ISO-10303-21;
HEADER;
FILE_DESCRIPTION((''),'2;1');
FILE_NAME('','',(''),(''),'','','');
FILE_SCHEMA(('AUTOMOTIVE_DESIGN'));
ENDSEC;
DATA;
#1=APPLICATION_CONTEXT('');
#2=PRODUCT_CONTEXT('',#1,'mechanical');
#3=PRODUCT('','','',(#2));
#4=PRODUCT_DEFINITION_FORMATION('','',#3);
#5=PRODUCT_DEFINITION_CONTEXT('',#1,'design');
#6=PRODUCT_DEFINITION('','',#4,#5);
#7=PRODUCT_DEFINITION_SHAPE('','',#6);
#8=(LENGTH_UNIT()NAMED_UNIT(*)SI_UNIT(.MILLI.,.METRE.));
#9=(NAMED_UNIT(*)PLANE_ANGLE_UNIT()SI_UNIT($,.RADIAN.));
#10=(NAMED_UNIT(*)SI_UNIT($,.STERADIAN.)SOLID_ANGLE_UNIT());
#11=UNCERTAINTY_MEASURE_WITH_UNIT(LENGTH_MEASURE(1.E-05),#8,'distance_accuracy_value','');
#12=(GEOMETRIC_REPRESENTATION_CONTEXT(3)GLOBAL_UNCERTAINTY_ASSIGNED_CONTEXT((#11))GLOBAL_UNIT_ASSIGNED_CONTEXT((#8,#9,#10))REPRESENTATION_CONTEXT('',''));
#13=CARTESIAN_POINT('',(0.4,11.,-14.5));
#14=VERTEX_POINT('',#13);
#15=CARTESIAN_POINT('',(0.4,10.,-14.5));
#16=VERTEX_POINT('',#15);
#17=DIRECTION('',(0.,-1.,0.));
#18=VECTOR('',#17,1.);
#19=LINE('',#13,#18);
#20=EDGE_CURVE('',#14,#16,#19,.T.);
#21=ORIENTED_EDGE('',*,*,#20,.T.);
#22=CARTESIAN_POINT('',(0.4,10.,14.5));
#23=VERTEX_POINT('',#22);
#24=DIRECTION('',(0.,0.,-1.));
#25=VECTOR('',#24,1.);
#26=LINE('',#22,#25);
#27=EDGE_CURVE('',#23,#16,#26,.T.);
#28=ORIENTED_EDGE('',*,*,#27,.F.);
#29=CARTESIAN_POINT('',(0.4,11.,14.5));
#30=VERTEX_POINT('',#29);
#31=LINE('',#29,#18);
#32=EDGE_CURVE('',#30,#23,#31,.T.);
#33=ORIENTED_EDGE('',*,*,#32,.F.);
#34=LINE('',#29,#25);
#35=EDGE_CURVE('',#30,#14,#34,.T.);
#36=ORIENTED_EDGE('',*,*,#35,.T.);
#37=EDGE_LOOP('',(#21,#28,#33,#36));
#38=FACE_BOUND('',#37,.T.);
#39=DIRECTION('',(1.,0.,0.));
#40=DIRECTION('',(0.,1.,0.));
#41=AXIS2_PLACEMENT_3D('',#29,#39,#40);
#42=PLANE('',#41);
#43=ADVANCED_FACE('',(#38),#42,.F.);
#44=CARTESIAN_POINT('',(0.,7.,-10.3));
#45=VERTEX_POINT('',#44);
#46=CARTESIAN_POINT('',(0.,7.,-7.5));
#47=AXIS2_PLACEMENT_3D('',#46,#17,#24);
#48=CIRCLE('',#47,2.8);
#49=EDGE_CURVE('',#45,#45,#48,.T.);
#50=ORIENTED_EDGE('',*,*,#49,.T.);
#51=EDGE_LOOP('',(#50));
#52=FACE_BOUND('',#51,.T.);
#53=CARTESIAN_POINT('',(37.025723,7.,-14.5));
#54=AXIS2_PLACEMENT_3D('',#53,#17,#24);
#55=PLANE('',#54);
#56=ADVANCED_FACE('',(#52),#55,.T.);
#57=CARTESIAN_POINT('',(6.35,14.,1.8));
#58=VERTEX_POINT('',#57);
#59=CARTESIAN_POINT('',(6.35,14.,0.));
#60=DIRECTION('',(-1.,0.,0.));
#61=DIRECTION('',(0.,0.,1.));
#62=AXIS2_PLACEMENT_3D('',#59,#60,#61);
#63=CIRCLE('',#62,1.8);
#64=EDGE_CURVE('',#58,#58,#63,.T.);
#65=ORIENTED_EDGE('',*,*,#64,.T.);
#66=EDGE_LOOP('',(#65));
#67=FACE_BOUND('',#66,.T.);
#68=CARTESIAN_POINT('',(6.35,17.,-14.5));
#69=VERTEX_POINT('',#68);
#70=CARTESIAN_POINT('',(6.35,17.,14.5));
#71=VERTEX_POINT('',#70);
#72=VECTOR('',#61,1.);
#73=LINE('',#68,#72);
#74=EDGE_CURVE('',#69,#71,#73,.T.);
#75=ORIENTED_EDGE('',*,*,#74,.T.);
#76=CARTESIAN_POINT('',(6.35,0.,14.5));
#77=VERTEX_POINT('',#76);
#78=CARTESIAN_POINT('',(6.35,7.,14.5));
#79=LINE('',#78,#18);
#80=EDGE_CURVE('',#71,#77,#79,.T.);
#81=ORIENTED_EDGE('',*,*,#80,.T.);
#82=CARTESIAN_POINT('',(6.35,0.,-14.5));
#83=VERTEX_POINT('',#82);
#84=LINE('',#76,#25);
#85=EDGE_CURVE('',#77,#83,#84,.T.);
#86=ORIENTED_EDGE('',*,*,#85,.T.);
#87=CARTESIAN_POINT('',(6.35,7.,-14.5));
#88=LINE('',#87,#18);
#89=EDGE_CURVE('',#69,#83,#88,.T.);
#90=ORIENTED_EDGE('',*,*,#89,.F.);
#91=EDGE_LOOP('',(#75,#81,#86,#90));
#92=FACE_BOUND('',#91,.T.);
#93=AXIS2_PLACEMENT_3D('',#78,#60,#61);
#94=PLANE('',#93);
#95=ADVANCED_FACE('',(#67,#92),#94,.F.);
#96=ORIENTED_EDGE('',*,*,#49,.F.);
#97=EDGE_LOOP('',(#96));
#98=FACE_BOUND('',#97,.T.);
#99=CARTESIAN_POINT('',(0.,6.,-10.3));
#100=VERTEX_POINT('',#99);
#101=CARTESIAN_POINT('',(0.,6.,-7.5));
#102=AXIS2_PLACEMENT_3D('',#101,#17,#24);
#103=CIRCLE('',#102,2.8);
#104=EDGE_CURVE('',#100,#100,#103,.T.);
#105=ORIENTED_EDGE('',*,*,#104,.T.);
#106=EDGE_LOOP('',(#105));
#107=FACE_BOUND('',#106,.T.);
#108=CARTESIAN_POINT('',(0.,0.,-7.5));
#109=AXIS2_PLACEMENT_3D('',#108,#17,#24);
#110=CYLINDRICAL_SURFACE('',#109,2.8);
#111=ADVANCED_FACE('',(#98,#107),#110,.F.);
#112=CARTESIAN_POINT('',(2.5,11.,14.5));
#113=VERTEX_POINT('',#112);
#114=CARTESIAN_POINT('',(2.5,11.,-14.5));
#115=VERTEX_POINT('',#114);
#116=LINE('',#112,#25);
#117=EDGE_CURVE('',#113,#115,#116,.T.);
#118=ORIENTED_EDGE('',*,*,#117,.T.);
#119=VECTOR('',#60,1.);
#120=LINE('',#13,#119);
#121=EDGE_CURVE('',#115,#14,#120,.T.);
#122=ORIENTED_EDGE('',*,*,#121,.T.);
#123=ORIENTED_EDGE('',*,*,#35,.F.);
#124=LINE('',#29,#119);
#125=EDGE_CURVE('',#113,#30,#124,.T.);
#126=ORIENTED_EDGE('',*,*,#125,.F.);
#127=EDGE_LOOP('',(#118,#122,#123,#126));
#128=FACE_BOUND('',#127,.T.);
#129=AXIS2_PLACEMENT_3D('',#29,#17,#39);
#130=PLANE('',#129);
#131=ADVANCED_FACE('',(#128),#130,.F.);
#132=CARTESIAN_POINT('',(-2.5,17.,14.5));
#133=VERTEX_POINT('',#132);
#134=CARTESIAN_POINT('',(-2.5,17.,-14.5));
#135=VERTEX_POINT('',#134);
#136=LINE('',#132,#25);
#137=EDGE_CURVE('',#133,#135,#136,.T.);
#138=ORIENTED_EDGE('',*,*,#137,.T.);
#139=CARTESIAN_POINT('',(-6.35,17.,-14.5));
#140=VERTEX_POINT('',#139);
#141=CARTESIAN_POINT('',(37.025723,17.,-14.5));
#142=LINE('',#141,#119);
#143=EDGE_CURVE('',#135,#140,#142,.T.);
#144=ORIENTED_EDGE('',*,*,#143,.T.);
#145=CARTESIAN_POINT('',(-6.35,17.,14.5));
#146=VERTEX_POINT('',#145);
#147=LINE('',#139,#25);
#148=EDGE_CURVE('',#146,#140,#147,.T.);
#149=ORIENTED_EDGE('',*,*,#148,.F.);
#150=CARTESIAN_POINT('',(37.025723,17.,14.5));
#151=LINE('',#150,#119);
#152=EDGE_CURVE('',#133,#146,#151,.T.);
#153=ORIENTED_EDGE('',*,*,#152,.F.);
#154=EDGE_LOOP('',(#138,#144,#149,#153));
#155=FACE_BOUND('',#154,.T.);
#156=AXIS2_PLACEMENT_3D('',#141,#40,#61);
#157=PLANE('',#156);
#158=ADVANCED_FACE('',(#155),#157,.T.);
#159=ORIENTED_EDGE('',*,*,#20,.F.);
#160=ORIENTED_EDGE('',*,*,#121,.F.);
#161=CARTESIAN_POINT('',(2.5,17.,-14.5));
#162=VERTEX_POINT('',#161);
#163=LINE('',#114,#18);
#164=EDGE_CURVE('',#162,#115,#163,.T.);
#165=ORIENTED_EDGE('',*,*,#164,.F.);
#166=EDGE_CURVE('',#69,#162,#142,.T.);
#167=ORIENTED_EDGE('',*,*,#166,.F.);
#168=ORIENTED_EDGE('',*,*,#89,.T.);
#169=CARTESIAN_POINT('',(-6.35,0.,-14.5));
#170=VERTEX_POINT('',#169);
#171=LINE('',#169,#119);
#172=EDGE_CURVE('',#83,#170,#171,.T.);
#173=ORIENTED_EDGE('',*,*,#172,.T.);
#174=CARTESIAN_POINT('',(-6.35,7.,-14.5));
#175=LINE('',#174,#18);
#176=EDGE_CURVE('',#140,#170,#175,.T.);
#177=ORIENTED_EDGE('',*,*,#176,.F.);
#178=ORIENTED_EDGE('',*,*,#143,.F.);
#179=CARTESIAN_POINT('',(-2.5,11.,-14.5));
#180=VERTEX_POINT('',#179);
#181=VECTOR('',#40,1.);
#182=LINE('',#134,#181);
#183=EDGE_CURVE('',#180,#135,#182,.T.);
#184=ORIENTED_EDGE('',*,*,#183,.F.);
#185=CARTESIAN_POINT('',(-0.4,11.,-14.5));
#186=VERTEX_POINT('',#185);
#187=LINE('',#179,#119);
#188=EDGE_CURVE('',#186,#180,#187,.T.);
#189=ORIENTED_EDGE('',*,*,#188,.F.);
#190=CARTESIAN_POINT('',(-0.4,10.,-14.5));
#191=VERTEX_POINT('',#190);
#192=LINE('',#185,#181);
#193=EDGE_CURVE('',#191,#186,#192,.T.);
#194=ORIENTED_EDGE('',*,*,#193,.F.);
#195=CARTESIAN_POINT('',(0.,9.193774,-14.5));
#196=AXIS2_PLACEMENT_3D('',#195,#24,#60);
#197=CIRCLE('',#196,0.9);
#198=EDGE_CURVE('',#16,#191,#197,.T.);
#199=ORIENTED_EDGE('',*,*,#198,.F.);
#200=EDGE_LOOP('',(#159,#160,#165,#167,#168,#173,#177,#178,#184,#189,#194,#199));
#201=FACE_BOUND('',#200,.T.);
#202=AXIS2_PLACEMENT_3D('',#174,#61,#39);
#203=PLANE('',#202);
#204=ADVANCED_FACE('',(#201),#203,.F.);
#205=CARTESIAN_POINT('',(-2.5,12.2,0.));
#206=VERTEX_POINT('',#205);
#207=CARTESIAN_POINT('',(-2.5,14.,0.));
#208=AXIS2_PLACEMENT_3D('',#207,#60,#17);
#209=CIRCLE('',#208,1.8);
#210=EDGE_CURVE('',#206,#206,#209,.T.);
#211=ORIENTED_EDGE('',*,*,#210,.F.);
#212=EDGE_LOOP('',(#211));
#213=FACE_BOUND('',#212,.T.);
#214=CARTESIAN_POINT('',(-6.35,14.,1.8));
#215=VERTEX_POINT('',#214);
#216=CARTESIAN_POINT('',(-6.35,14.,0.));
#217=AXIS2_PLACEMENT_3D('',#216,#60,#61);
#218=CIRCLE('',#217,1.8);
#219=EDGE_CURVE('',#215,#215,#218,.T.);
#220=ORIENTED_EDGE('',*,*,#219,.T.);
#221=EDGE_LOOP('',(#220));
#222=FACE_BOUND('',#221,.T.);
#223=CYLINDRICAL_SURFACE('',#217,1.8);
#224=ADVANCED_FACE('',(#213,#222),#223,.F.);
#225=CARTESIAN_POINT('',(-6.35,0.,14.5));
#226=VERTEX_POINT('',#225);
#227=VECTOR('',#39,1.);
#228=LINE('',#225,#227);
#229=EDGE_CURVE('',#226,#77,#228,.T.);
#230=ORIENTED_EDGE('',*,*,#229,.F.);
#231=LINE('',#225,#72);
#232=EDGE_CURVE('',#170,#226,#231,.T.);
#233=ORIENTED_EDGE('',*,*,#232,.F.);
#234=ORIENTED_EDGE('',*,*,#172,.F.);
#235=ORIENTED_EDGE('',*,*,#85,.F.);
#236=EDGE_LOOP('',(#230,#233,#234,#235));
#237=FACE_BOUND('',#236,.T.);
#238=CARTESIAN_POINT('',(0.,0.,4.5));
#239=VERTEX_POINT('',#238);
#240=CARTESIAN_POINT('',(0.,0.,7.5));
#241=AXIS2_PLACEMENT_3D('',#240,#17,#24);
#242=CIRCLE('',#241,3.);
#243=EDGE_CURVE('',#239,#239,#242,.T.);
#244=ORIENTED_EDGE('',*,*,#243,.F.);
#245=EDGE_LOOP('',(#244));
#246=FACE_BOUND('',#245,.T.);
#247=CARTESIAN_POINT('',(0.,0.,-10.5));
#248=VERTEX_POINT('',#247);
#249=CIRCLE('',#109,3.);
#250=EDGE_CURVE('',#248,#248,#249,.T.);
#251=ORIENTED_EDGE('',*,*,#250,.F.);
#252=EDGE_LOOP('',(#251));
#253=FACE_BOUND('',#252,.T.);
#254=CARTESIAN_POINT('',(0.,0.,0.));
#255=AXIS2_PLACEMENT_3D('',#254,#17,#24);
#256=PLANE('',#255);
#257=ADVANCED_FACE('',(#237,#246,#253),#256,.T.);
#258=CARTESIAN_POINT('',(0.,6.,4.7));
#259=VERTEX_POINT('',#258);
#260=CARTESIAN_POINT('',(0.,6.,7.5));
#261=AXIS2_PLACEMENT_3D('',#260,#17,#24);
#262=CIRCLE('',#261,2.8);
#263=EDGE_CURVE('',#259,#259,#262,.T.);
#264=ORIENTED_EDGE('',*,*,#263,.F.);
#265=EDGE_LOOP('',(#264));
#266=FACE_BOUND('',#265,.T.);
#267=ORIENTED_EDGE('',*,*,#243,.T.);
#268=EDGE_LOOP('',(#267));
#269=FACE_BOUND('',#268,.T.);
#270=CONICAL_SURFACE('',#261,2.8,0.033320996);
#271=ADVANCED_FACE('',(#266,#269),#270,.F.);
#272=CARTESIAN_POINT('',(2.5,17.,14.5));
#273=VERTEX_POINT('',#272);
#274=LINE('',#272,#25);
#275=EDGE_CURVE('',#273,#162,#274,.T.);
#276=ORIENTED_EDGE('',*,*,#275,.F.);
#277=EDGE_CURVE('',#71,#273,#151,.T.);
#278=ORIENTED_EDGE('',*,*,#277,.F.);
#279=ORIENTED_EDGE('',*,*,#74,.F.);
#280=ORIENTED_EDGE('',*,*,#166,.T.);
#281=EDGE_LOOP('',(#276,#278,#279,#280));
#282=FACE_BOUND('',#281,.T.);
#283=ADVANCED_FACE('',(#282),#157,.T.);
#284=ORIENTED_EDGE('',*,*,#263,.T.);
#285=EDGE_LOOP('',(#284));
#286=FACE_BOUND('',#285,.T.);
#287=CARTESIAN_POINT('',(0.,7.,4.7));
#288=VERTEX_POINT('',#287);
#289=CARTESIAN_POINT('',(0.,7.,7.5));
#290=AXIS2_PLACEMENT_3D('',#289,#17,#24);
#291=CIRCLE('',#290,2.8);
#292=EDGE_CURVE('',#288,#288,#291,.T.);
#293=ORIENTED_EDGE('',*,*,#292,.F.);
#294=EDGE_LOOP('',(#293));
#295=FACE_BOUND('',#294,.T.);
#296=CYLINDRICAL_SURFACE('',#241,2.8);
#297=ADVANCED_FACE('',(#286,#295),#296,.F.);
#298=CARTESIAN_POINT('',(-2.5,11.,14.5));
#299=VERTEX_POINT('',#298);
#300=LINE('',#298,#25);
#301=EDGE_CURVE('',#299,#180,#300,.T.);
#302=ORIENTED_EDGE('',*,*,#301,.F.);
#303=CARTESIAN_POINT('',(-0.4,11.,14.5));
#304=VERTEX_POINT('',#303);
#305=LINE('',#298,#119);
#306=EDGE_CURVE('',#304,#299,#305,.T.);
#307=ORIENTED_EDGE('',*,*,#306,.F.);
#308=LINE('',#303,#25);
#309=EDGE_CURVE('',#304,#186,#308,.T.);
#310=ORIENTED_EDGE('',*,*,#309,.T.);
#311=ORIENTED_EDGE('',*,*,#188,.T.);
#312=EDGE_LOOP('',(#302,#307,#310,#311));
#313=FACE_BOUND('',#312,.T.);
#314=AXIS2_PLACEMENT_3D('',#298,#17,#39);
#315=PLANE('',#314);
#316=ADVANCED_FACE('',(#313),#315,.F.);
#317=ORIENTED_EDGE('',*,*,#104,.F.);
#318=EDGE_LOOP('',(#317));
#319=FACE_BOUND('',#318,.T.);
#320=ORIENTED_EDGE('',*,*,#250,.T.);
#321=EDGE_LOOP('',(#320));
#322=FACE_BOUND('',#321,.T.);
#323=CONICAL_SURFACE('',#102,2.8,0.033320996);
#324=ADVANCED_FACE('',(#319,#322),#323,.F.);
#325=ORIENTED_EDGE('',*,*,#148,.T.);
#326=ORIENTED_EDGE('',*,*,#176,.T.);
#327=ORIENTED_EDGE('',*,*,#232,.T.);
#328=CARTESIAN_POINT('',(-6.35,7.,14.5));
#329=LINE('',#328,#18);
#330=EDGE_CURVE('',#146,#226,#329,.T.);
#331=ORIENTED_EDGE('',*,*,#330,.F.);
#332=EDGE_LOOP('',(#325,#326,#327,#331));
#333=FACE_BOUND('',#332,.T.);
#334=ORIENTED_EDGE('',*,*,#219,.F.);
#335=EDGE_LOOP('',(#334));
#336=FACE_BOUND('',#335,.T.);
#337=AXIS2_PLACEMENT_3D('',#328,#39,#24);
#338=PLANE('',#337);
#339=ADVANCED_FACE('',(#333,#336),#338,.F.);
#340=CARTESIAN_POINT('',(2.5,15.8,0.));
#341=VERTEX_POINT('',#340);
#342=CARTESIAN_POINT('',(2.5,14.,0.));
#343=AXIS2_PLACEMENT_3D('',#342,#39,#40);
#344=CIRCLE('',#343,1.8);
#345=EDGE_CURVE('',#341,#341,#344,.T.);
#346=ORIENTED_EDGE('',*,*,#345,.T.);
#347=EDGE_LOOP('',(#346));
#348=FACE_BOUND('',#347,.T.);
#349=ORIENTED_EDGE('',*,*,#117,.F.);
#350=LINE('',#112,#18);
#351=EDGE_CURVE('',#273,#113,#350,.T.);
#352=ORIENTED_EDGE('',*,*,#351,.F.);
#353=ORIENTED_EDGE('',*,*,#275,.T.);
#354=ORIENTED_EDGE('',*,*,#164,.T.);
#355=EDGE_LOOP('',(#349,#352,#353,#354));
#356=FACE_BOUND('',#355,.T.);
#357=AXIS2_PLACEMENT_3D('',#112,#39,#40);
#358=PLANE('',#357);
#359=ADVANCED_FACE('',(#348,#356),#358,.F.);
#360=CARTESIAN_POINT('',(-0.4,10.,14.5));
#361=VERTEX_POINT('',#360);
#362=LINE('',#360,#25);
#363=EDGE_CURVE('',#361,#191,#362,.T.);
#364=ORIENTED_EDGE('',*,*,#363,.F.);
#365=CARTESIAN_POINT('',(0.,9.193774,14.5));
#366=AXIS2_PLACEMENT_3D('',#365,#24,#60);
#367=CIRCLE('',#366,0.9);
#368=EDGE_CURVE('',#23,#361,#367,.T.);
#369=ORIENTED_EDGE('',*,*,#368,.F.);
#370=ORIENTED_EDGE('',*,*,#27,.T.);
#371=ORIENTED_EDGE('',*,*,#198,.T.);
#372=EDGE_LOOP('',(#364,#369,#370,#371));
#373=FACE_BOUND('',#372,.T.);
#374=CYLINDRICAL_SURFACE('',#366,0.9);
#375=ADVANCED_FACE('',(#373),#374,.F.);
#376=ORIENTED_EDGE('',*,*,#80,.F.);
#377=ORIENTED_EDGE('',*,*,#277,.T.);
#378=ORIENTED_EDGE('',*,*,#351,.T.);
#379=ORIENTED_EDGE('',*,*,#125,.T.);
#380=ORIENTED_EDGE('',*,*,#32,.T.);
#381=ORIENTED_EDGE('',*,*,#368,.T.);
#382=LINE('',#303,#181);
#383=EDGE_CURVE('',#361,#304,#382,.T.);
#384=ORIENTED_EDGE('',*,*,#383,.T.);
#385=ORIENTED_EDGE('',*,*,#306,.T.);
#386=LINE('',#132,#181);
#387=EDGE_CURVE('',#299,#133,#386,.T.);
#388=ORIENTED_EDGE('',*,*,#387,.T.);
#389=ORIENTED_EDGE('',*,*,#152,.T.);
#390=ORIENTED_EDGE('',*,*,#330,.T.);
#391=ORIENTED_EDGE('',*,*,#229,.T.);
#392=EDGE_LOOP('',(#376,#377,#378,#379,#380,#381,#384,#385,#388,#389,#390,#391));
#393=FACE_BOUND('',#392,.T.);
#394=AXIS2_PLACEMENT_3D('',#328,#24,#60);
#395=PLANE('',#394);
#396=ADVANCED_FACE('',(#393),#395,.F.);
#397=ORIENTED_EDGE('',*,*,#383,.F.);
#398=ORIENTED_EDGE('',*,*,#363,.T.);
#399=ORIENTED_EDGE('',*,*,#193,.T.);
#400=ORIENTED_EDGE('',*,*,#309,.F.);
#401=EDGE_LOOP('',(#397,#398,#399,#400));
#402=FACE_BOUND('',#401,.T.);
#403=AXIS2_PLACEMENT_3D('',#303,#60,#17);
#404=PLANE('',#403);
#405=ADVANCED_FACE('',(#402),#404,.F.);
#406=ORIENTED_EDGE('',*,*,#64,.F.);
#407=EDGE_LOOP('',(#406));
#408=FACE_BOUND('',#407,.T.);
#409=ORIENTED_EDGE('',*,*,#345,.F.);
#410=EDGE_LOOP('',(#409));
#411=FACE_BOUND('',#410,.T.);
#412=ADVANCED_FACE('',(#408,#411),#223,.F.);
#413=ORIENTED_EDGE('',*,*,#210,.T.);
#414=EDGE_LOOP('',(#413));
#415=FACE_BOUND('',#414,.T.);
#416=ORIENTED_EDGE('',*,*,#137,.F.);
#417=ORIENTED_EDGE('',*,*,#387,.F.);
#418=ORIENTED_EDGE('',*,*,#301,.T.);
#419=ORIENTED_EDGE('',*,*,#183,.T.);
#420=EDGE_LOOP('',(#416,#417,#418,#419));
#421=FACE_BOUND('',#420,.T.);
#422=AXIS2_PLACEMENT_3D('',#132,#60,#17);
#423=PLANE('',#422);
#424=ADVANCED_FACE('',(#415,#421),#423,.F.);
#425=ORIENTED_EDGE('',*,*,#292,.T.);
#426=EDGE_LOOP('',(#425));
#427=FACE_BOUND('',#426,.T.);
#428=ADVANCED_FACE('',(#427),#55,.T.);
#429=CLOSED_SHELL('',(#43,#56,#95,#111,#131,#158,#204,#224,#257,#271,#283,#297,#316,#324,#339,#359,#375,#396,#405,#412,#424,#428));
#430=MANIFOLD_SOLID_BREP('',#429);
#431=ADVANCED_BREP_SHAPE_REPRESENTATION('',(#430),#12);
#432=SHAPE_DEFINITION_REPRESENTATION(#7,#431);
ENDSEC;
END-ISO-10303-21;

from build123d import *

# Parameters (mm, degrees)
SKETCH1_W            = 12.7
SKETCH1_H            = 29
BOSS_EXTRUDE1_DEPTH  = 7
HOLE1_D              = 5.6
HOLE1_CBORE_D        = 6
HOLE1_CBORE_DEPTH    = 6
SKETCH4_W            = 29
SKETCH4_H            = 10
BOSS_EXTRUDE2_DEPTH  = 12.7
CUT_EXTRUDE1_DEPTH   = 35.209976615
M3_CLEARANCE_HOLE1_D = 3.6
CHAMFER1_SIZE        = 6
CHAMFER1_SIZE_2      = 0.2


with BuildPart() as part:
    # Sketch1 → Boss-Extrude1 (new body)
    with BuildSketch(Plane(origin=(0, 0, 0), x_dir=(1, 0, 0), z_dir=(0, 1, 0))):
        Rectangle(SKETCH1_W, SKETCH1_H)
    extrude(amount=BOSS_EXTRUDE1_DEPTH)

    # Hole1 (through all)
    with Locations(Plane(origin=(0, 0, 0), x_dir=(-1, 0, 0), z_dir=(0, -1, 0))):
        with Locations((0, -7.5), (0, 7.5)):
            CounterBoreHole(HOLE1_D / 2, HOLE1_CBORE_D / 2, HOLE1_CBORE_DEPTH)

    # Sketch4 → Boss-Extrude2 (add)
    with BuildSketch(Plane.ZY.offset(6.35)):
        with Locations((0, 12)):
            Rectangle(SKETCH4_W, SKETCH4_H)
    extrude(amount=-BOSS_EXTRUDE2_DEPTH)

    # Sketch5 → Cut-Extrude1 (cut, through all)
    with BuildSketch(Plane(origin=(0, 0, -14.5), x_dir=(-1, 0, 0), z_dir=(0, 0, -1))):
        with BuildLine():
            Line((-0.4, 11), (-0.4, 10))
            ThreePointArc((-0.4, 10), (0, 8.293774225), (0.4, 10))
            Line((0.4, 10), (0.4, 11))
            Line((0.4, 11), (2.5, 11))
            Line((2.5, 11), (2.5, 17))
            Line((2.5, 17), (-2.5, 17))
            Line((-2.5, 17), (-2.5, 11))
            Line((-2.5, 11), (-0.4, 11))
        make_face()
    extrude(amount=-CUT_EXTRUDE1_DEPTH, mode=Mode.SUBTRACT)

    # M3 Clearance Hole1 (through all)
    with Locations(Plane.ZY.offset(6.35)):
        with Locations((0, 14)):
            Hole(M3_CLEARANCE_HOLE1_D / 2)

    # Chamfer1
    # the kernel refuses this chamfer: 6, 0.2 mm, written as the material it adds along each edge
    with BuildSketch(Plane(origin=(0, 6, -7.5), x_dir=(-1, 0, 0), z_dir=(0, 0, 1))) as chamfer1_piece_1_section:
        Polygon((3, CHAMFER1_SIZE), (3 - CHAMFER1_SIZE_2, 0), (3, 0), align=None)
    chamfer1_piece_1 = revolve(axis=Axis((0, 6, -7.5), (0, -1, 0)), mode=Mode.PRIVATE)
    chamfer1_piece_1 = split(chamfer1_piece_1, bisect_by=Plane(origin=(2.92947192, 0, -7.5), z_dir=(0, 1, 0)), keep=Keep.TOP, mode=Mode.PRIVATE)
    chamfer1_piece_1 = chamfer1_piece_1 - Plane(origin=(0, 3.000982397, -7.5), x_dir=(1, 0, 0), z_dir=(0, 1, 0)) * Cylinder(2.8, 24, mode=Mode.PRIVATE)
    add(chamfer1_piece_1)
    with BuildSketch(Plane(origin=(0, 6, 7.5), x_dir=(-1, 0, 0), z_dir=(0, 0, 1))) as chamfer1_piece_2_section:
        Polygon((3, CHAMFER1_SIZE), (3 - CHAMFER1_SIZE_2, 0), (3, 0), align=None)
    chamfer1_piece_2 = revolve(axis=Axis((0, 6, 7.5), (0, -1, 0)), mode=Mode.PRIVATE)
    chamfer1_piece_2 = split(chamfer1_piece_2, bisect_by=Plane(origin=(2.92947192, 0, 7.5), z_dir=(0, 1, 0)), keep=Keep.TOP, mode=Mode.PRIVATE)
    chamfer1_piece_2 = chamfer1_piece_2 - Plane(origin=(0, 3.000982397, 7.5), x_dir=(1, 0, 0), z_dir=(0, 1, 0)) * Cylinder(2.8, 24, mode=Mode.PRIVATE)
    add(chamfer1_piece_2)


solid = part.part
